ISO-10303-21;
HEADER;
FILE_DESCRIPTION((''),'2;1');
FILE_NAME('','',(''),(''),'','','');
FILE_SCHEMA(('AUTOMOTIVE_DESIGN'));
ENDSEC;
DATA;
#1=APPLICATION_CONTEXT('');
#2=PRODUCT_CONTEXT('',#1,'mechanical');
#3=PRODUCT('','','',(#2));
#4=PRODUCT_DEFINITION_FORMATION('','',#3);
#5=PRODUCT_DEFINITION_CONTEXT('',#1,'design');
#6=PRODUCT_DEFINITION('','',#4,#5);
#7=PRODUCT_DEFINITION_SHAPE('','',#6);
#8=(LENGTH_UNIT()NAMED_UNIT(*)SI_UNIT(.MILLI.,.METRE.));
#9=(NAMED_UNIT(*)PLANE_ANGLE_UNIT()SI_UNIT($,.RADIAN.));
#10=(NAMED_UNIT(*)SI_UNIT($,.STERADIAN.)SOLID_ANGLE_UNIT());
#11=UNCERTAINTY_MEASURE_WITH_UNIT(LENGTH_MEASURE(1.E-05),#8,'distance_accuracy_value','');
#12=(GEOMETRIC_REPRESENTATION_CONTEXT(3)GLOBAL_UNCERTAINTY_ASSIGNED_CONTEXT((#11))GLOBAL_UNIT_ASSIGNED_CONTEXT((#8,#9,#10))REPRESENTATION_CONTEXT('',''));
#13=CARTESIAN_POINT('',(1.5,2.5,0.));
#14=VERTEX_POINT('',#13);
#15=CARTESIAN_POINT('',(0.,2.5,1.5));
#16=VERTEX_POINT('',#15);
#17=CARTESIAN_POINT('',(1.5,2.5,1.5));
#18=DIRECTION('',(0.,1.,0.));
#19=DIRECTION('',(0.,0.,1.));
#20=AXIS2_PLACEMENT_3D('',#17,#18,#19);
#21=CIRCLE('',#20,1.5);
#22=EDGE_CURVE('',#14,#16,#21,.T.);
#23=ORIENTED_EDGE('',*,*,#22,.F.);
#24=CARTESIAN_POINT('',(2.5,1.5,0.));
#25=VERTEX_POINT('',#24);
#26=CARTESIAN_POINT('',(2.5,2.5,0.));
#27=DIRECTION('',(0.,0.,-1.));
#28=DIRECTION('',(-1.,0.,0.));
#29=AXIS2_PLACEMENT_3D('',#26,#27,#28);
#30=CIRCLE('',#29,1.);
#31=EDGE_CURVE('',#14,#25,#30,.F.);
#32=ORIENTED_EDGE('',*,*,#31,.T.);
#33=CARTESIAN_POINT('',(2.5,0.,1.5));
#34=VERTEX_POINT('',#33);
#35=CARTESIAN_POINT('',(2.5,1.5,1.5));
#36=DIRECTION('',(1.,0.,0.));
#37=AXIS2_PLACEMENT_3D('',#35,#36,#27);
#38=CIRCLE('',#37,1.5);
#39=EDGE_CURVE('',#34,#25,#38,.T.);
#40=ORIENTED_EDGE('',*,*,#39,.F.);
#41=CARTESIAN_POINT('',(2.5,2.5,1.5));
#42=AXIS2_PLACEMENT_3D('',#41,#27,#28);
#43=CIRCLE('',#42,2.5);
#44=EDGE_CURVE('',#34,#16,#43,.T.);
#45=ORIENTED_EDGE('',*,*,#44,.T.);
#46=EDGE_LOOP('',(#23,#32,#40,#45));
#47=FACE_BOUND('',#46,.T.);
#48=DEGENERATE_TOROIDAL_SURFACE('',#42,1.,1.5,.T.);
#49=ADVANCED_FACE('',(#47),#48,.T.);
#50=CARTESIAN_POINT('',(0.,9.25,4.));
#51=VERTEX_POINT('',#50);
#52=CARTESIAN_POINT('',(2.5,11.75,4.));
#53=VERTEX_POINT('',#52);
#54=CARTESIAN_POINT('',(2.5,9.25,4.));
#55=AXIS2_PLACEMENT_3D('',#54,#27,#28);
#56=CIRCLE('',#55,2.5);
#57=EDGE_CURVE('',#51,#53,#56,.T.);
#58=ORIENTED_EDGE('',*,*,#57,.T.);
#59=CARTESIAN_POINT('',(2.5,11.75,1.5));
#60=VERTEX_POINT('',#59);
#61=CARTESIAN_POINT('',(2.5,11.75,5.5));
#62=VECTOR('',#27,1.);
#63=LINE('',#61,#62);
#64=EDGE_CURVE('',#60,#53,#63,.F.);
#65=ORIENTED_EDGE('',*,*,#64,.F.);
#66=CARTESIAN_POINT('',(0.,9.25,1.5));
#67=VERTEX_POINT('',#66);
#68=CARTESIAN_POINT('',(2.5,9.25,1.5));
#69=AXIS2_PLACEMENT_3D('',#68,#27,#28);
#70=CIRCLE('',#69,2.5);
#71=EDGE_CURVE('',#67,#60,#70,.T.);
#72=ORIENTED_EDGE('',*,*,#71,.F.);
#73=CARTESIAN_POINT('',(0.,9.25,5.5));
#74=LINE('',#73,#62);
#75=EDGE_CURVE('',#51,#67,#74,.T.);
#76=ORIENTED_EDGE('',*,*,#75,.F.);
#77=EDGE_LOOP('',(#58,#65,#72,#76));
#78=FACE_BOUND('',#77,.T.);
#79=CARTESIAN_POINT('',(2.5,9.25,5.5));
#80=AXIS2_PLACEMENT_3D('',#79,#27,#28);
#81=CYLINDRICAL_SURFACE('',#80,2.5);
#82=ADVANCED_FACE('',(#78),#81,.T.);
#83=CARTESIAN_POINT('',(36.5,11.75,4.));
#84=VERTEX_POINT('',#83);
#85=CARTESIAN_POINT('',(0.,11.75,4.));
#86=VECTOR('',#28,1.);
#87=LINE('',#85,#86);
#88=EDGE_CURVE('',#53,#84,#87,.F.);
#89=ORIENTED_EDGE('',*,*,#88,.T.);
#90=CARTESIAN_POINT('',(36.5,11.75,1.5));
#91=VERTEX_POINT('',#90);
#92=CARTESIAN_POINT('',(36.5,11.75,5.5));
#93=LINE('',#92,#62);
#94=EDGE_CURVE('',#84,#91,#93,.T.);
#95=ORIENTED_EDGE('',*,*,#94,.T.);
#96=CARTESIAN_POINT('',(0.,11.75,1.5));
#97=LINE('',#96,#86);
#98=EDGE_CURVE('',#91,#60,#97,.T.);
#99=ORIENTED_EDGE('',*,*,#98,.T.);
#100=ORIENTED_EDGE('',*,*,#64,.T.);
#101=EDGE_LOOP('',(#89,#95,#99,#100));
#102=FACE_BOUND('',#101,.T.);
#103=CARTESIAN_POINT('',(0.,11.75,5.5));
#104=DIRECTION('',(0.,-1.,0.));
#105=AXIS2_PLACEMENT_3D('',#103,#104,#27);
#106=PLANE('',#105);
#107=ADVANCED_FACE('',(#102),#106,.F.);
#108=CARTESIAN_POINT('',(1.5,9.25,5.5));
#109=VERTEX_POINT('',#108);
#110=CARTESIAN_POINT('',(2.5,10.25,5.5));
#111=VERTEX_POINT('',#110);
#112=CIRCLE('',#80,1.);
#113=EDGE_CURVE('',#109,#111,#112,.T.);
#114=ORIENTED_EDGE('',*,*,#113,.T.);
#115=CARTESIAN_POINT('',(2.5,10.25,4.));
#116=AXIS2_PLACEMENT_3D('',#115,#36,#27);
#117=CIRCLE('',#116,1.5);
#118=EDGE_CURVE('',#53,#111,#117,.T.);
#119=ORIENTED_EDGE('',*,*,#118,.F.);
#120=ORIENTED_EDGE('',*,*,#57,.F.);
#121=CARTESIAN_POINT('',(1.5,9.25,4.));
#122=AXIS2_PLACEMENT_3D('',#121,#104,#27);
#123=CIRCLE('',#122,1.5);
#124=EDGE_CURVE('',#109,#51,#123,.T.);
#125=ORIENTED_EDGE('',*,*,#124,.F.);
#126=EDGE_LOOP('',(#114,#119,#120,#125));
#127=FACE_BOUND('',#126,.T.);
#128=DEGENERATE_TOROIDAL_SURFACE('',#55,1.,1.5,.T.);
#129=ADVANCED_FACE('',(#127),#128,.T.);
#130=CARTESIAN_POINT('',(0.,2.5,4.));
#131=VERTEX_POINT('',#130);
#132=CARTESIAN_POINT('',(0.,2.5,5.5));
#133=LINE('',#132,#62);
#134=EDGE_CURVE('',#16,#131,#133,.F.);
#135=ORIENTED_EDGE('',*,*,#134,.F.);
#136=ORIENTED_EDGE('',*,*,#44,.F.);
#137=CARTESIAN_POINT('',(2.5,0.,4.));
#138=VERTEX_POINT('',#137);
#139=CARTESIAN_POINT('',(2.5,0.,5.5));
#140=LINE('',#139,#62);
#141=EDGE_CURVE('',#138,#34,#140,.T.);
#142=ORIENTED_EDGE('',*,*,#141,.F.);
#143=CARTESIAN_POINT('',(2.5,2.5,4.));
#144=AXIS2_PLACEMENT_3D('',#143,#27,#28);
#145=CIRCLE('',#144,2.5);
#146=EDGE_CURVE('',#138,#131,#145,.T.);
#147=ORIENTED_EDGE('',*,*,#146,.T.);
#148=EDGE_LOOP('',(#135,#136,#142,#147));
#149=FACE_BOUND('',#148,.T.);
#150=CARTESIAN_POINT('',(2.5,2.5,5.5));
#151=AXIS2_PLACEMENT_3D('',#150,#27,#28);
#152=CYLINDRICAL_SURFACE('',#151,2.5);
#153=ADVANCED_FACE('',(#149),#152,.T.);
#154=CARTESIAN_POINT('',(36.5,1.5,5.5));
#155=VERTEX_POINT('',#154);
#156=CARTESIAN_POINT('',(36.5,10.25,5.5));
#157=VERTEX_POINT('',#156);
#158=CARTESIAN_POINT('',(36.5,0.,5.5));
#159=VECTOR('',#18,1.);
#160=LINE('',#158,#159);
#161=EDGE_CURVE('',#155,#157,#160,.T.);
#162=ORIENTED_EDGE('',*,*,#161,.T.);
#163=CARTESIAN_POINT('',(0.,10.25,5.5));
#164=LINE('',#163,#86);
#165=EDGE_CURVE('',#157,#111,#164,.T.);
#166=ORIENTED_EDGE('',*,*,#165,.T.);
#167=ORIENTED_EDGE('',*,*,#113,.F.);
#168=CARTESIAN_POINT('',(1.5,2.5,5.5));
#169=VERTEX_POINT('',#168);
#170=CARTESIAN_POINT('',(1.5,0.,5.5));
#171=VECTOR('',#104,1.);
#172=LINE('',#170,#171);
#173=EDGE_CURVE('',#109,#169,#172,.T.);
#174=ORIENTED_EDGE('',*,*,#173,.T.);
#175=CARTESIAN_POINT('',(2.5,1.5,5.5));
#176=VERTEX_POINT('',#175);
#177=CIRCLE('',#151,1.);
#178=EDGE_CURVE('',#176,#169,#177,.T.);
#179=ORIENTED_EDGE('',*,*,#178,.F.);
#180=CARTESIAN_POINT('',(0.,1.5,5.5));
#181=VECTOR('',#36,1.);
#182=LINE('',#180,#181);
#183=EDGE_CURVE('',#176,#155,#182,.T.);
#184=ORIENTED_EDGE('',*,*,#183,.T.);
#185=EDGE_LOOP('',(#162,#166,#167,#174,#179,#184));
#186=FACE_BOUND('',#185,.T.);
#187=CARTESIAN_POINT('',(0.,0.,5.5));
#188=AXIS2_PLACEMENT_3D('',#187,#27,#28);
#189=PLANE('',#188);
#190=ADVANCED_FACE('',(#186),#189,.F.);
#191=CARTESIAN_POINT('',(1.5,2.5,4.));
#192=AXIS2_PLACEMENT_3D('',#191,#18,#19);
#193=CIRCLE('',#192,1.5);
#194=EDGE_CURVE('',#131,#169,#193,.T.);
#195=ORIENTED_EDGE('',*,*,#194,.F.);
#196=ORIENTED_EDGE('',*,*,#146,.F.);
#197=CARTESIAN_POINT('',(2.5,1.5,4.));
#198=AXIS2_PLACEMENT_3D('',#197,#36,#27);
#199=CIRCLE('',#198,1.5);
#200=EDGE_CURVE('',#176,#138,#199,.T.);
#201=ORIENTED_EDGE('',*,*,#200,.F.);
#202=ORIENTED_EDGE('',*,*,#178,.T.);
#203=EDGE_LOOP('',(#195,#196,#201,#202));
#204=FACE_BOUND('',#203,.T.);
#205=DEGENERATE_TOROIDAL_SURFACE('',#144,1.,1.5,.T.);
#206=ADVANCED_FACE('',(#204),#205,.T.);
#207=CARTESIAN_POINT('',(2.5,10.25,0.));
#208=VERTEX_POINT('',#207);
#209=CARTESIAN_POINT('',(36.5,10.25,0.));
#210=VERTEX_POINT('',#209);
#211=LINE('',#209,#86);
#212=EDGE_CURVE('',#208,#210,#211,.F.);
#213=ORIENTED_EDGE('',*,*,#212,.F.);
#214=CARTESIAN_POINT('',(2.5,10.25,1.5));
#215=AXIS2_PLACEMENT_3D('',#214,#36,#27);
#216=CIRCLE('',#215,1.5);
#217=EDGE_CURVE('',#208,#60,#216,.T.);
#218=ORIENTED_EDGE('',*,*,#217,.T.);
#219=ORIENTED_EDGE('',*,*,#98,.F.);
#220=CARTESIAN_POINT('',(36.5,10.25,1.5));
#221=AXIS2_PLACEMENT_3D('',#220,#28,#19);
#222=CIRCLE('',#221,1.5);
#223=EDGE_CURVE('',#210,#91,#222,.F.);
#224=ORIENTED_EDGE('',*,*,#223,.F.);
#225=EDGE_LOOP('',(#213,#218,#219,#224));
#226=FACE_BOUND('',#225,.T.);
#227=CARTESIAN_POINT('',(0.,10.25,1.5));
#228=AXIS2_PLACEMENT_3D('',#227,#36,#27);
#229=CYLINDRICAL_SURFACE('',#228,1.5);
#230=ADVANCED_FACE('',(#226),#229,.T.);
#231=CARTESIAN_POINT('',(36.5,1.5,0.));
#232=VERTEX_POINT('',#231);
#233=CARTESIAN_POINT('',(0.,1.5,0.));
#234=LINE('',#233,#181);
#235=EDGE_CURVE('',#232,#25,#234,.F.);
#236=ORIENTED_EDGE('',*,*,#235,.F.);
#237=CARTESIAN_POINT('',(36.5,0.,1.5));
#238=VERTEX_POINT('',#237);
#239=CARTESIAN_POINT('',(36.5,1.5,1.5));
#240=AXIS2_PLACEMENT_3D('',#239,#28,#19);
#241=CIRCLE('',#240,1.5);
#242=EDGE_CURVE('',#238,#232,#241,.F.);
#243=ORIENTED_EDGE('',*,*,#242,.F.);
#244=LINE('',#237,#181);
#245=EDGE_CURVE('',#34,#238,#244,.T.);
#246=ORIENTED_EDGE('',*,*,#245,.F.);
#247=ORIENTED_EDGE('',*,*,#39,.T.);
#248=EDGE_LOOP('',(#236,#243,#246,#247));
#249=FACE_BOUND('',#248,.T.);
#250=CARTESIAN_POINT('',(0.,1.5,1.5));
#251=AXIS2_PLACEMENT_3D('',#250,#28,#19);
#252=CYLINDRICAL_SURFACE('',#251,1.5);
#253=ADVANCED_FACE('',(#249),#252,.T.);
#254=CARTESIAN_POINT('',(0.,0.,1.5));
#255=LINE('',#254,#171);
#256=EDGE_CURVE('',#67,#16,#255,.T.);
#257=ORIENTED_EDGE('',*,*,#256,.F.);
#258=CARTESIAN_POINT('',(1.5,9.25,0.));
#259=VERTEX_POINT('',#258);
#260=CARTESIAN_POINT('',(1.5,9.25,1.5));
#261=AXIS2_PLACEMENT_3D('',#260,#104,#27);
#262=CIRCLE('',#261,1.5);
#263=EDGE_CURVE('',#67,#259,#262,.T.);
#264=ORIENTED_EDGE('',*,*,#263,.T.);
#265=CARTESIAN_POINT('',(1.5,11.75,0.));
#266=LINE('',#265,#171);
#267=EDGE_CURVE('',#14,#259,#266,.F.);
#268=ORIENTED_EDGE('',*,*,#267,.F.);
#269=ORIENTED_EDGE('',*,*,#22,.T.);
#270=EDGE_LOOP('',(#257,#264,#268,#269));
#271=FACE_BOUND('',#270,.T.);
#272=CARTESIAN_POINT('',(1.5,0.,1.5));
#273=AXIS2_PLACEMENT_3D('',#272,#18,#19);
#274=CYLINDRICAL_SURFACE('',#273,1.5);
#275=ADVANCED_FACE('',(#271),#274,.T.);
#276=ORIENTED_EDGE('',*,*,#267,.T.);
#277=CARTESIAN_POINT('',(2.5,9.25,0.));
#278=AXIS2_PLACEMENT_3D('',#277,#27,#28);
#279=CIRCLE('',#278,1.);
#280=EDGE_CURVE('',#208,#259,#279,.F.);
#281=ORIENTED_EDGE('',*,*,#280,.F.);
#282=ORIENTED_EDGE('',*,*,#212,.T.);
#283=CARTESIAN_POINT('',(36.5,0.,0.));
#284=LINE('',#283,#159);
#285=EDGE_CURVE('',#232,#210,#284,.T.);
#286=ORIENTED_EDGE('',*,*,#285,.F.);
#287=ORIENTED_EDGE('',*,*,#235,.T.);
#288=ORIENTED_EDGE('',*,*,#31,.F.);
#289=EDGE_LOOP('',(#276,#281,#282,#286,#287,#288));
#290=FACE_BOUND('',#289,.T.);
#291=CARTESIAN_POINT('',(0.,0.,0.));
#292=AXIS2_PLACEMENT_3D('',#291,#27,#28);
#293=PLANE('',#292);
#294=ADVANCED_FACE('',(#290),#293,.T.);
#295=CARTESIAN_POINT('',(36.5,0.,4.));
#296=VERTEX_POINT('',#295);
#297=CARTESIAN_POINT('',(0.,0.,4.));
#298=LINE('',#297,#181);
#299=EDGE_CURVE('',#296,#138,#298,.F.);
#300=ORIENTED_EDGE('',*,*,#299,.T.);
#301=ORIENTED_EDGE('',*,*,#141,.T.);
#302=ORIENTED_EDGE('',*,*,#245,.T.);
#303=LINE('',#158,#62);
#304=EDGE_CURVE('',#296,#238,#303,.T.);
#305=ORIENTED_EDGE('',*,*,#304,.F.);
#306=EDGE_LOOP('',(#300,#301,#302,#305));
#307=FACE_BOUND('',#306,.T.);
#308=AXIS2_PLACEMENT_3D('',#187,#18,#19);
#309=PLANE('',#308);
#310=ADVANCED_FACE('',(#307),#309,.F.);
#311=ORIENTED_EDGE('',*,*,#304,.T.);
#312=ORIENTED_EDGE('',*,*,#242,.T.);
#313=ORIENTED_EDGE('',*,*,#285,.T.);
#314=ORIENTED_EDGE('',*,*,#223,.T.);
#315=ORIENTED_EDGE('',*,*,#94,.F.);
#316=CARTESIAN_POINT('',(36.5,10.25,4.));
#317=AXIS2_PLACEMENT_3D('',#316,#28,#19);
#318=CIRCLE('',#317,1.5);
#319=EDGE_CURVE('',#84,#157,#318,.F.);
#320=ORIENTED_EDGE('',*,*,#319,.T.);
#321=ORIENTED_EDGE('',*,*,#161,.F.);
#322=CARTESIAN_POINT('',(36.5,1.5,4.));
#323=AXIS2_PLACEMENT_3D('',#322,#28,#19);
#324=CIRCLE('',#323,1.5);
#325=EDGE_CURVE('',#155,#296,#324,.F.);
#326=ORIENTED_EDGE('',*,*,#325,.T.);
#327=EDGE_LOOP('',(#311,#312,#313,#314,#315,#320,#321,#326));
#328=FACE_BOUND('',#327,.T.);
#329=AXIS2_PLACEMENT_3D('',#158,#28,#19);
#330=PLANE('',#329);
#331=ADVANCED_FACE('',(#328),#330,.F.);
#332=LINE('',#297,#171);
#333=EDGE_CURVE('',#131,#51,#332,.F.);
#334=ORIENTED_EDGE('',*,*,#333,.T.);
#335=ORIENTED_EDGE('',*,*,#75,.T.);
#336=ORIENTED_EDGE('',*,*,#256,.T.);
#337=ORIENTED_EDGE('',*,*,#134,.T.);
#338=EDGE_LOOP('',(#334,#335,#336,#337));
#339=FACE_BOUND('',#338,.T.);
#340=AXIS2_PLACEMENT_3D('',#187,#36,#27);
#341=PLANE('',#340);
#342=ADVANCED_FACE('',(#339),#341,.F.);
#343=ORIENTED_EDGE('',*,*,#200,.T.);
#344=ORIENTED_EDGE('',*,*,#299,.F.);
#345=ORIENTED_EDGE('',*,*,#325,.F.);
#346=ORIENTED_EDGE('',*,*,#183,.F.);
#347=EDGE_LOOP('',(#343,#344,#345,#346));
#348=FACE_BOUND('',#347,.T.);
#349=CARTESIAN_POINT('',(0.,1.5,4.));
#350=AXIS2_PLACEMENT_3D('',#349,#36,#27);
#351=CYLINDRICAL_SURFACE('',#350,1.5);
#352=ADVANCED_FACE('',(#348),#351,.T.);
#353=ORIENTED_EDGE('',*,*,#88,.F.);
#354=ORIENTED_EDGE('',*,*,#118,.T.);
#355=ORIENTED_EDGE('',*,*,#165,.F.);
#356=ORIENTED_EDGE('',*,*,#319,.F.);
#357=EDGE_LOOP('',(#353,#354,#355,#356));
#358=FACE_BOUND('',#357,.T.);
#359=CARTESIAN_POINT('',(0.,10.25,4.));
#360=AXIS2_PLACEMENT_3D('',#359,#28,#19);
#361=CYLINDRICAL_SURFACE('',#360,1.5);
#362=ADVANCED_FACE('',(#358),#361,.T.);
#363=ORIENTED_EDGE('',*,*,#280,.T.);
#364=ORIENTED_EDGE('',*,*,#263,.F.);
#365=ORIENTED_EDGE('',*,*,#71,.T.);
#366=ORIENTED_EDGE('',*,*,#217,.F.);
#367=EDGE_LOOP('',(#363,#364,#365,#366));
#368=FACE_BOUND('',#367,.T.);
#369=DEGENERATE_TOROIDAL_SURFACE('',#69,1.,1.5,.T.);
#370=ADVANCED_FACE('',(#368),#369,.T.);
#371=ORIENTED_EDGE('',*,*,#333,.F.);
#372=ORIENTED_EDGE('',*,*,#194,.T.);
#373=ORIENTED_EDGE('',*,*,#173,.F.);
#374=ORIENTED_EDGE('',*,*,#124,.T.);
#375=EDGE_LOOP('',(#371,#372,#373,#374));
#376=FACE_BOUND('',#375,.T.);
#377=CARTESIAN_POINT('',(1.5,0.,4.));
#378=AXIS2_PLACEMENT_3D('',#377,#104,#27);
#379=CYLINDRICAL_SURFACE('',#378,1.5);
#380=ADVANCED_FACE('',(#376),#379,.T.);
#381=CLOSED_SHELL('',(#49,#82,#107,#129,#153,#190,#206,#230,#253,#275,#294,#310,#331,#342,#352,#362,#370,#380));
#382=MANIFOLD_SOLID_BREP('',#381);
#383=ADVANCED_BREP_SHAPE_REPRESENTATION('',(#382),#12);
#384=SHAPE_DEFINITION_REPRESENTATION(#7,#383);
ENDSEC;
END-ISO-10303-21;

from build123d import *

# Parameters (mm, degrees)
SKETCH1_W           = 36.5
SKETCH1_H           = 11.75
BOSS_EXTRUDE1_DEPTH = 5.5
BODY_FILLET_R       = 1.5
FILLET1_R           = 2.5


with BuildPart() as part:
    # Sketch1 → Boss-Extrude1 (new body)
    with BuildSketch(Plane.XY):
        with Locations((18.25, 5.875)):
            Rectangle(SKETCH1_W, SKETCH1_H)
    extrude(amount=BOSS_EXTRUDE1_DEPTH)

    # Body Fillet
    body_fillet_edges = [part.edges().sort_by_distance(p)[0] for p in [
        (18.25, 11.75, 5.5),
        (0, 5.875, 5.5),
        (18.25, 11.75, 0),
        (18.25, 0, 0),
        (0, 5.875, 0),
        (18.25, 0, 5.5),
    ]]
    fillet(body_fillet_edges, radius=BODY_FILLET_R)

    # Fillet1
    # the kernel refuses this fillet: 2.5 mm, written as the material it takes off along each edge
    with BuildSketch(Plane(origin=(2.5, 9.25, 0), x_dir=(-1, 0, 0), z_dir=(0, -1, 0))) as fillet1_piece_1:
        with BuildLine():
            CenterArc((1, -1.5), 1.5, 0, 90)
            Line((2.5, -1.5), (2.5, 0))
            Line((2.5, 0), (1, 0))
        make_face()
    revolve(axis=Axis((2.5, 9.25, 0), (0, 0, -1)), revolution_arc=90, mode=Mode.SUBTRACT)
    with BuildSketch(Plane(origin=(2.5, 2.5, 0), x_dir=(0, -1, 0), z_dir=(1, 0, 0))) as fillet1_piece_2:
        with BuildLine():
            CenterArc((1, -1.5), 1.5, 0, 90)
            Line((2.5, -1.5), (2.5, 0))
            Line((2.5, 0), (1, 0))
        make_face()
    revolve(axis=Axis((2.5, 2.5, 0), (0, 0, -1)), revolution_arc=90, mode=Mode.SUBTRACT)
    with BuildSketch(Plane(origin=(2.5, 9.25, 5.5), x_dir=(0, 1, 0), z_dir=(1, 0, 0))) as fillet1_piece_3:
        with BuildLine():
            CenterArc((1, -1.5), 1.5, 0, 90)
            Line((2.5, -1.5), (2.5, 0))
            Line((2.5, 0), (1, 0))
        make_face()
    revolve(axis=Axis((2.5, 9.25, 5.5), (0, 0, 1)), revolution_arc=90, mode=Mode.SUBTRACT)
    with BuildSketch(Plane(origin=(2.5, 2.5, 5.5), x_dir=(-1, 0, 0), z_dir=(0, 1, 0))) as fillet1_piece_4:
        with BuildLine():
            CenterArc((1, -1.5), 1.5, 0, 90)
            Line((2.5, -1.5), (2.5, 0))
            Line((2.5, 0), (1, 0))
        make_face()
    revolve(axis=Axis((2.5, 2.5, 5.5), (0, 0, 1)), revolution_arc=90, mode=Mode.SUBTRACT)
    with BuildSketch(Plane(origin=(0, 0, 0), x_dir=(1, 0, 0), z_dir=(0, 0, 1)), Plane(origin=(0, 11.75, 0), x_dir=(0, -1, 0), z_dir=(0, 0, 1))) as fillet1_piece_5:
        with BuildLine():
            CenterArc((FILLET1_R, FILLET1_R), FILLET1_R, 180, 90)
            Line((0, FILLET1_R), (0, 0))
            Line((0, 0), (FILLET1_R, 0))
        make_face()
    extrude(amount=5.5, mode=Mode.SUBTRACT)


solid = part.part
